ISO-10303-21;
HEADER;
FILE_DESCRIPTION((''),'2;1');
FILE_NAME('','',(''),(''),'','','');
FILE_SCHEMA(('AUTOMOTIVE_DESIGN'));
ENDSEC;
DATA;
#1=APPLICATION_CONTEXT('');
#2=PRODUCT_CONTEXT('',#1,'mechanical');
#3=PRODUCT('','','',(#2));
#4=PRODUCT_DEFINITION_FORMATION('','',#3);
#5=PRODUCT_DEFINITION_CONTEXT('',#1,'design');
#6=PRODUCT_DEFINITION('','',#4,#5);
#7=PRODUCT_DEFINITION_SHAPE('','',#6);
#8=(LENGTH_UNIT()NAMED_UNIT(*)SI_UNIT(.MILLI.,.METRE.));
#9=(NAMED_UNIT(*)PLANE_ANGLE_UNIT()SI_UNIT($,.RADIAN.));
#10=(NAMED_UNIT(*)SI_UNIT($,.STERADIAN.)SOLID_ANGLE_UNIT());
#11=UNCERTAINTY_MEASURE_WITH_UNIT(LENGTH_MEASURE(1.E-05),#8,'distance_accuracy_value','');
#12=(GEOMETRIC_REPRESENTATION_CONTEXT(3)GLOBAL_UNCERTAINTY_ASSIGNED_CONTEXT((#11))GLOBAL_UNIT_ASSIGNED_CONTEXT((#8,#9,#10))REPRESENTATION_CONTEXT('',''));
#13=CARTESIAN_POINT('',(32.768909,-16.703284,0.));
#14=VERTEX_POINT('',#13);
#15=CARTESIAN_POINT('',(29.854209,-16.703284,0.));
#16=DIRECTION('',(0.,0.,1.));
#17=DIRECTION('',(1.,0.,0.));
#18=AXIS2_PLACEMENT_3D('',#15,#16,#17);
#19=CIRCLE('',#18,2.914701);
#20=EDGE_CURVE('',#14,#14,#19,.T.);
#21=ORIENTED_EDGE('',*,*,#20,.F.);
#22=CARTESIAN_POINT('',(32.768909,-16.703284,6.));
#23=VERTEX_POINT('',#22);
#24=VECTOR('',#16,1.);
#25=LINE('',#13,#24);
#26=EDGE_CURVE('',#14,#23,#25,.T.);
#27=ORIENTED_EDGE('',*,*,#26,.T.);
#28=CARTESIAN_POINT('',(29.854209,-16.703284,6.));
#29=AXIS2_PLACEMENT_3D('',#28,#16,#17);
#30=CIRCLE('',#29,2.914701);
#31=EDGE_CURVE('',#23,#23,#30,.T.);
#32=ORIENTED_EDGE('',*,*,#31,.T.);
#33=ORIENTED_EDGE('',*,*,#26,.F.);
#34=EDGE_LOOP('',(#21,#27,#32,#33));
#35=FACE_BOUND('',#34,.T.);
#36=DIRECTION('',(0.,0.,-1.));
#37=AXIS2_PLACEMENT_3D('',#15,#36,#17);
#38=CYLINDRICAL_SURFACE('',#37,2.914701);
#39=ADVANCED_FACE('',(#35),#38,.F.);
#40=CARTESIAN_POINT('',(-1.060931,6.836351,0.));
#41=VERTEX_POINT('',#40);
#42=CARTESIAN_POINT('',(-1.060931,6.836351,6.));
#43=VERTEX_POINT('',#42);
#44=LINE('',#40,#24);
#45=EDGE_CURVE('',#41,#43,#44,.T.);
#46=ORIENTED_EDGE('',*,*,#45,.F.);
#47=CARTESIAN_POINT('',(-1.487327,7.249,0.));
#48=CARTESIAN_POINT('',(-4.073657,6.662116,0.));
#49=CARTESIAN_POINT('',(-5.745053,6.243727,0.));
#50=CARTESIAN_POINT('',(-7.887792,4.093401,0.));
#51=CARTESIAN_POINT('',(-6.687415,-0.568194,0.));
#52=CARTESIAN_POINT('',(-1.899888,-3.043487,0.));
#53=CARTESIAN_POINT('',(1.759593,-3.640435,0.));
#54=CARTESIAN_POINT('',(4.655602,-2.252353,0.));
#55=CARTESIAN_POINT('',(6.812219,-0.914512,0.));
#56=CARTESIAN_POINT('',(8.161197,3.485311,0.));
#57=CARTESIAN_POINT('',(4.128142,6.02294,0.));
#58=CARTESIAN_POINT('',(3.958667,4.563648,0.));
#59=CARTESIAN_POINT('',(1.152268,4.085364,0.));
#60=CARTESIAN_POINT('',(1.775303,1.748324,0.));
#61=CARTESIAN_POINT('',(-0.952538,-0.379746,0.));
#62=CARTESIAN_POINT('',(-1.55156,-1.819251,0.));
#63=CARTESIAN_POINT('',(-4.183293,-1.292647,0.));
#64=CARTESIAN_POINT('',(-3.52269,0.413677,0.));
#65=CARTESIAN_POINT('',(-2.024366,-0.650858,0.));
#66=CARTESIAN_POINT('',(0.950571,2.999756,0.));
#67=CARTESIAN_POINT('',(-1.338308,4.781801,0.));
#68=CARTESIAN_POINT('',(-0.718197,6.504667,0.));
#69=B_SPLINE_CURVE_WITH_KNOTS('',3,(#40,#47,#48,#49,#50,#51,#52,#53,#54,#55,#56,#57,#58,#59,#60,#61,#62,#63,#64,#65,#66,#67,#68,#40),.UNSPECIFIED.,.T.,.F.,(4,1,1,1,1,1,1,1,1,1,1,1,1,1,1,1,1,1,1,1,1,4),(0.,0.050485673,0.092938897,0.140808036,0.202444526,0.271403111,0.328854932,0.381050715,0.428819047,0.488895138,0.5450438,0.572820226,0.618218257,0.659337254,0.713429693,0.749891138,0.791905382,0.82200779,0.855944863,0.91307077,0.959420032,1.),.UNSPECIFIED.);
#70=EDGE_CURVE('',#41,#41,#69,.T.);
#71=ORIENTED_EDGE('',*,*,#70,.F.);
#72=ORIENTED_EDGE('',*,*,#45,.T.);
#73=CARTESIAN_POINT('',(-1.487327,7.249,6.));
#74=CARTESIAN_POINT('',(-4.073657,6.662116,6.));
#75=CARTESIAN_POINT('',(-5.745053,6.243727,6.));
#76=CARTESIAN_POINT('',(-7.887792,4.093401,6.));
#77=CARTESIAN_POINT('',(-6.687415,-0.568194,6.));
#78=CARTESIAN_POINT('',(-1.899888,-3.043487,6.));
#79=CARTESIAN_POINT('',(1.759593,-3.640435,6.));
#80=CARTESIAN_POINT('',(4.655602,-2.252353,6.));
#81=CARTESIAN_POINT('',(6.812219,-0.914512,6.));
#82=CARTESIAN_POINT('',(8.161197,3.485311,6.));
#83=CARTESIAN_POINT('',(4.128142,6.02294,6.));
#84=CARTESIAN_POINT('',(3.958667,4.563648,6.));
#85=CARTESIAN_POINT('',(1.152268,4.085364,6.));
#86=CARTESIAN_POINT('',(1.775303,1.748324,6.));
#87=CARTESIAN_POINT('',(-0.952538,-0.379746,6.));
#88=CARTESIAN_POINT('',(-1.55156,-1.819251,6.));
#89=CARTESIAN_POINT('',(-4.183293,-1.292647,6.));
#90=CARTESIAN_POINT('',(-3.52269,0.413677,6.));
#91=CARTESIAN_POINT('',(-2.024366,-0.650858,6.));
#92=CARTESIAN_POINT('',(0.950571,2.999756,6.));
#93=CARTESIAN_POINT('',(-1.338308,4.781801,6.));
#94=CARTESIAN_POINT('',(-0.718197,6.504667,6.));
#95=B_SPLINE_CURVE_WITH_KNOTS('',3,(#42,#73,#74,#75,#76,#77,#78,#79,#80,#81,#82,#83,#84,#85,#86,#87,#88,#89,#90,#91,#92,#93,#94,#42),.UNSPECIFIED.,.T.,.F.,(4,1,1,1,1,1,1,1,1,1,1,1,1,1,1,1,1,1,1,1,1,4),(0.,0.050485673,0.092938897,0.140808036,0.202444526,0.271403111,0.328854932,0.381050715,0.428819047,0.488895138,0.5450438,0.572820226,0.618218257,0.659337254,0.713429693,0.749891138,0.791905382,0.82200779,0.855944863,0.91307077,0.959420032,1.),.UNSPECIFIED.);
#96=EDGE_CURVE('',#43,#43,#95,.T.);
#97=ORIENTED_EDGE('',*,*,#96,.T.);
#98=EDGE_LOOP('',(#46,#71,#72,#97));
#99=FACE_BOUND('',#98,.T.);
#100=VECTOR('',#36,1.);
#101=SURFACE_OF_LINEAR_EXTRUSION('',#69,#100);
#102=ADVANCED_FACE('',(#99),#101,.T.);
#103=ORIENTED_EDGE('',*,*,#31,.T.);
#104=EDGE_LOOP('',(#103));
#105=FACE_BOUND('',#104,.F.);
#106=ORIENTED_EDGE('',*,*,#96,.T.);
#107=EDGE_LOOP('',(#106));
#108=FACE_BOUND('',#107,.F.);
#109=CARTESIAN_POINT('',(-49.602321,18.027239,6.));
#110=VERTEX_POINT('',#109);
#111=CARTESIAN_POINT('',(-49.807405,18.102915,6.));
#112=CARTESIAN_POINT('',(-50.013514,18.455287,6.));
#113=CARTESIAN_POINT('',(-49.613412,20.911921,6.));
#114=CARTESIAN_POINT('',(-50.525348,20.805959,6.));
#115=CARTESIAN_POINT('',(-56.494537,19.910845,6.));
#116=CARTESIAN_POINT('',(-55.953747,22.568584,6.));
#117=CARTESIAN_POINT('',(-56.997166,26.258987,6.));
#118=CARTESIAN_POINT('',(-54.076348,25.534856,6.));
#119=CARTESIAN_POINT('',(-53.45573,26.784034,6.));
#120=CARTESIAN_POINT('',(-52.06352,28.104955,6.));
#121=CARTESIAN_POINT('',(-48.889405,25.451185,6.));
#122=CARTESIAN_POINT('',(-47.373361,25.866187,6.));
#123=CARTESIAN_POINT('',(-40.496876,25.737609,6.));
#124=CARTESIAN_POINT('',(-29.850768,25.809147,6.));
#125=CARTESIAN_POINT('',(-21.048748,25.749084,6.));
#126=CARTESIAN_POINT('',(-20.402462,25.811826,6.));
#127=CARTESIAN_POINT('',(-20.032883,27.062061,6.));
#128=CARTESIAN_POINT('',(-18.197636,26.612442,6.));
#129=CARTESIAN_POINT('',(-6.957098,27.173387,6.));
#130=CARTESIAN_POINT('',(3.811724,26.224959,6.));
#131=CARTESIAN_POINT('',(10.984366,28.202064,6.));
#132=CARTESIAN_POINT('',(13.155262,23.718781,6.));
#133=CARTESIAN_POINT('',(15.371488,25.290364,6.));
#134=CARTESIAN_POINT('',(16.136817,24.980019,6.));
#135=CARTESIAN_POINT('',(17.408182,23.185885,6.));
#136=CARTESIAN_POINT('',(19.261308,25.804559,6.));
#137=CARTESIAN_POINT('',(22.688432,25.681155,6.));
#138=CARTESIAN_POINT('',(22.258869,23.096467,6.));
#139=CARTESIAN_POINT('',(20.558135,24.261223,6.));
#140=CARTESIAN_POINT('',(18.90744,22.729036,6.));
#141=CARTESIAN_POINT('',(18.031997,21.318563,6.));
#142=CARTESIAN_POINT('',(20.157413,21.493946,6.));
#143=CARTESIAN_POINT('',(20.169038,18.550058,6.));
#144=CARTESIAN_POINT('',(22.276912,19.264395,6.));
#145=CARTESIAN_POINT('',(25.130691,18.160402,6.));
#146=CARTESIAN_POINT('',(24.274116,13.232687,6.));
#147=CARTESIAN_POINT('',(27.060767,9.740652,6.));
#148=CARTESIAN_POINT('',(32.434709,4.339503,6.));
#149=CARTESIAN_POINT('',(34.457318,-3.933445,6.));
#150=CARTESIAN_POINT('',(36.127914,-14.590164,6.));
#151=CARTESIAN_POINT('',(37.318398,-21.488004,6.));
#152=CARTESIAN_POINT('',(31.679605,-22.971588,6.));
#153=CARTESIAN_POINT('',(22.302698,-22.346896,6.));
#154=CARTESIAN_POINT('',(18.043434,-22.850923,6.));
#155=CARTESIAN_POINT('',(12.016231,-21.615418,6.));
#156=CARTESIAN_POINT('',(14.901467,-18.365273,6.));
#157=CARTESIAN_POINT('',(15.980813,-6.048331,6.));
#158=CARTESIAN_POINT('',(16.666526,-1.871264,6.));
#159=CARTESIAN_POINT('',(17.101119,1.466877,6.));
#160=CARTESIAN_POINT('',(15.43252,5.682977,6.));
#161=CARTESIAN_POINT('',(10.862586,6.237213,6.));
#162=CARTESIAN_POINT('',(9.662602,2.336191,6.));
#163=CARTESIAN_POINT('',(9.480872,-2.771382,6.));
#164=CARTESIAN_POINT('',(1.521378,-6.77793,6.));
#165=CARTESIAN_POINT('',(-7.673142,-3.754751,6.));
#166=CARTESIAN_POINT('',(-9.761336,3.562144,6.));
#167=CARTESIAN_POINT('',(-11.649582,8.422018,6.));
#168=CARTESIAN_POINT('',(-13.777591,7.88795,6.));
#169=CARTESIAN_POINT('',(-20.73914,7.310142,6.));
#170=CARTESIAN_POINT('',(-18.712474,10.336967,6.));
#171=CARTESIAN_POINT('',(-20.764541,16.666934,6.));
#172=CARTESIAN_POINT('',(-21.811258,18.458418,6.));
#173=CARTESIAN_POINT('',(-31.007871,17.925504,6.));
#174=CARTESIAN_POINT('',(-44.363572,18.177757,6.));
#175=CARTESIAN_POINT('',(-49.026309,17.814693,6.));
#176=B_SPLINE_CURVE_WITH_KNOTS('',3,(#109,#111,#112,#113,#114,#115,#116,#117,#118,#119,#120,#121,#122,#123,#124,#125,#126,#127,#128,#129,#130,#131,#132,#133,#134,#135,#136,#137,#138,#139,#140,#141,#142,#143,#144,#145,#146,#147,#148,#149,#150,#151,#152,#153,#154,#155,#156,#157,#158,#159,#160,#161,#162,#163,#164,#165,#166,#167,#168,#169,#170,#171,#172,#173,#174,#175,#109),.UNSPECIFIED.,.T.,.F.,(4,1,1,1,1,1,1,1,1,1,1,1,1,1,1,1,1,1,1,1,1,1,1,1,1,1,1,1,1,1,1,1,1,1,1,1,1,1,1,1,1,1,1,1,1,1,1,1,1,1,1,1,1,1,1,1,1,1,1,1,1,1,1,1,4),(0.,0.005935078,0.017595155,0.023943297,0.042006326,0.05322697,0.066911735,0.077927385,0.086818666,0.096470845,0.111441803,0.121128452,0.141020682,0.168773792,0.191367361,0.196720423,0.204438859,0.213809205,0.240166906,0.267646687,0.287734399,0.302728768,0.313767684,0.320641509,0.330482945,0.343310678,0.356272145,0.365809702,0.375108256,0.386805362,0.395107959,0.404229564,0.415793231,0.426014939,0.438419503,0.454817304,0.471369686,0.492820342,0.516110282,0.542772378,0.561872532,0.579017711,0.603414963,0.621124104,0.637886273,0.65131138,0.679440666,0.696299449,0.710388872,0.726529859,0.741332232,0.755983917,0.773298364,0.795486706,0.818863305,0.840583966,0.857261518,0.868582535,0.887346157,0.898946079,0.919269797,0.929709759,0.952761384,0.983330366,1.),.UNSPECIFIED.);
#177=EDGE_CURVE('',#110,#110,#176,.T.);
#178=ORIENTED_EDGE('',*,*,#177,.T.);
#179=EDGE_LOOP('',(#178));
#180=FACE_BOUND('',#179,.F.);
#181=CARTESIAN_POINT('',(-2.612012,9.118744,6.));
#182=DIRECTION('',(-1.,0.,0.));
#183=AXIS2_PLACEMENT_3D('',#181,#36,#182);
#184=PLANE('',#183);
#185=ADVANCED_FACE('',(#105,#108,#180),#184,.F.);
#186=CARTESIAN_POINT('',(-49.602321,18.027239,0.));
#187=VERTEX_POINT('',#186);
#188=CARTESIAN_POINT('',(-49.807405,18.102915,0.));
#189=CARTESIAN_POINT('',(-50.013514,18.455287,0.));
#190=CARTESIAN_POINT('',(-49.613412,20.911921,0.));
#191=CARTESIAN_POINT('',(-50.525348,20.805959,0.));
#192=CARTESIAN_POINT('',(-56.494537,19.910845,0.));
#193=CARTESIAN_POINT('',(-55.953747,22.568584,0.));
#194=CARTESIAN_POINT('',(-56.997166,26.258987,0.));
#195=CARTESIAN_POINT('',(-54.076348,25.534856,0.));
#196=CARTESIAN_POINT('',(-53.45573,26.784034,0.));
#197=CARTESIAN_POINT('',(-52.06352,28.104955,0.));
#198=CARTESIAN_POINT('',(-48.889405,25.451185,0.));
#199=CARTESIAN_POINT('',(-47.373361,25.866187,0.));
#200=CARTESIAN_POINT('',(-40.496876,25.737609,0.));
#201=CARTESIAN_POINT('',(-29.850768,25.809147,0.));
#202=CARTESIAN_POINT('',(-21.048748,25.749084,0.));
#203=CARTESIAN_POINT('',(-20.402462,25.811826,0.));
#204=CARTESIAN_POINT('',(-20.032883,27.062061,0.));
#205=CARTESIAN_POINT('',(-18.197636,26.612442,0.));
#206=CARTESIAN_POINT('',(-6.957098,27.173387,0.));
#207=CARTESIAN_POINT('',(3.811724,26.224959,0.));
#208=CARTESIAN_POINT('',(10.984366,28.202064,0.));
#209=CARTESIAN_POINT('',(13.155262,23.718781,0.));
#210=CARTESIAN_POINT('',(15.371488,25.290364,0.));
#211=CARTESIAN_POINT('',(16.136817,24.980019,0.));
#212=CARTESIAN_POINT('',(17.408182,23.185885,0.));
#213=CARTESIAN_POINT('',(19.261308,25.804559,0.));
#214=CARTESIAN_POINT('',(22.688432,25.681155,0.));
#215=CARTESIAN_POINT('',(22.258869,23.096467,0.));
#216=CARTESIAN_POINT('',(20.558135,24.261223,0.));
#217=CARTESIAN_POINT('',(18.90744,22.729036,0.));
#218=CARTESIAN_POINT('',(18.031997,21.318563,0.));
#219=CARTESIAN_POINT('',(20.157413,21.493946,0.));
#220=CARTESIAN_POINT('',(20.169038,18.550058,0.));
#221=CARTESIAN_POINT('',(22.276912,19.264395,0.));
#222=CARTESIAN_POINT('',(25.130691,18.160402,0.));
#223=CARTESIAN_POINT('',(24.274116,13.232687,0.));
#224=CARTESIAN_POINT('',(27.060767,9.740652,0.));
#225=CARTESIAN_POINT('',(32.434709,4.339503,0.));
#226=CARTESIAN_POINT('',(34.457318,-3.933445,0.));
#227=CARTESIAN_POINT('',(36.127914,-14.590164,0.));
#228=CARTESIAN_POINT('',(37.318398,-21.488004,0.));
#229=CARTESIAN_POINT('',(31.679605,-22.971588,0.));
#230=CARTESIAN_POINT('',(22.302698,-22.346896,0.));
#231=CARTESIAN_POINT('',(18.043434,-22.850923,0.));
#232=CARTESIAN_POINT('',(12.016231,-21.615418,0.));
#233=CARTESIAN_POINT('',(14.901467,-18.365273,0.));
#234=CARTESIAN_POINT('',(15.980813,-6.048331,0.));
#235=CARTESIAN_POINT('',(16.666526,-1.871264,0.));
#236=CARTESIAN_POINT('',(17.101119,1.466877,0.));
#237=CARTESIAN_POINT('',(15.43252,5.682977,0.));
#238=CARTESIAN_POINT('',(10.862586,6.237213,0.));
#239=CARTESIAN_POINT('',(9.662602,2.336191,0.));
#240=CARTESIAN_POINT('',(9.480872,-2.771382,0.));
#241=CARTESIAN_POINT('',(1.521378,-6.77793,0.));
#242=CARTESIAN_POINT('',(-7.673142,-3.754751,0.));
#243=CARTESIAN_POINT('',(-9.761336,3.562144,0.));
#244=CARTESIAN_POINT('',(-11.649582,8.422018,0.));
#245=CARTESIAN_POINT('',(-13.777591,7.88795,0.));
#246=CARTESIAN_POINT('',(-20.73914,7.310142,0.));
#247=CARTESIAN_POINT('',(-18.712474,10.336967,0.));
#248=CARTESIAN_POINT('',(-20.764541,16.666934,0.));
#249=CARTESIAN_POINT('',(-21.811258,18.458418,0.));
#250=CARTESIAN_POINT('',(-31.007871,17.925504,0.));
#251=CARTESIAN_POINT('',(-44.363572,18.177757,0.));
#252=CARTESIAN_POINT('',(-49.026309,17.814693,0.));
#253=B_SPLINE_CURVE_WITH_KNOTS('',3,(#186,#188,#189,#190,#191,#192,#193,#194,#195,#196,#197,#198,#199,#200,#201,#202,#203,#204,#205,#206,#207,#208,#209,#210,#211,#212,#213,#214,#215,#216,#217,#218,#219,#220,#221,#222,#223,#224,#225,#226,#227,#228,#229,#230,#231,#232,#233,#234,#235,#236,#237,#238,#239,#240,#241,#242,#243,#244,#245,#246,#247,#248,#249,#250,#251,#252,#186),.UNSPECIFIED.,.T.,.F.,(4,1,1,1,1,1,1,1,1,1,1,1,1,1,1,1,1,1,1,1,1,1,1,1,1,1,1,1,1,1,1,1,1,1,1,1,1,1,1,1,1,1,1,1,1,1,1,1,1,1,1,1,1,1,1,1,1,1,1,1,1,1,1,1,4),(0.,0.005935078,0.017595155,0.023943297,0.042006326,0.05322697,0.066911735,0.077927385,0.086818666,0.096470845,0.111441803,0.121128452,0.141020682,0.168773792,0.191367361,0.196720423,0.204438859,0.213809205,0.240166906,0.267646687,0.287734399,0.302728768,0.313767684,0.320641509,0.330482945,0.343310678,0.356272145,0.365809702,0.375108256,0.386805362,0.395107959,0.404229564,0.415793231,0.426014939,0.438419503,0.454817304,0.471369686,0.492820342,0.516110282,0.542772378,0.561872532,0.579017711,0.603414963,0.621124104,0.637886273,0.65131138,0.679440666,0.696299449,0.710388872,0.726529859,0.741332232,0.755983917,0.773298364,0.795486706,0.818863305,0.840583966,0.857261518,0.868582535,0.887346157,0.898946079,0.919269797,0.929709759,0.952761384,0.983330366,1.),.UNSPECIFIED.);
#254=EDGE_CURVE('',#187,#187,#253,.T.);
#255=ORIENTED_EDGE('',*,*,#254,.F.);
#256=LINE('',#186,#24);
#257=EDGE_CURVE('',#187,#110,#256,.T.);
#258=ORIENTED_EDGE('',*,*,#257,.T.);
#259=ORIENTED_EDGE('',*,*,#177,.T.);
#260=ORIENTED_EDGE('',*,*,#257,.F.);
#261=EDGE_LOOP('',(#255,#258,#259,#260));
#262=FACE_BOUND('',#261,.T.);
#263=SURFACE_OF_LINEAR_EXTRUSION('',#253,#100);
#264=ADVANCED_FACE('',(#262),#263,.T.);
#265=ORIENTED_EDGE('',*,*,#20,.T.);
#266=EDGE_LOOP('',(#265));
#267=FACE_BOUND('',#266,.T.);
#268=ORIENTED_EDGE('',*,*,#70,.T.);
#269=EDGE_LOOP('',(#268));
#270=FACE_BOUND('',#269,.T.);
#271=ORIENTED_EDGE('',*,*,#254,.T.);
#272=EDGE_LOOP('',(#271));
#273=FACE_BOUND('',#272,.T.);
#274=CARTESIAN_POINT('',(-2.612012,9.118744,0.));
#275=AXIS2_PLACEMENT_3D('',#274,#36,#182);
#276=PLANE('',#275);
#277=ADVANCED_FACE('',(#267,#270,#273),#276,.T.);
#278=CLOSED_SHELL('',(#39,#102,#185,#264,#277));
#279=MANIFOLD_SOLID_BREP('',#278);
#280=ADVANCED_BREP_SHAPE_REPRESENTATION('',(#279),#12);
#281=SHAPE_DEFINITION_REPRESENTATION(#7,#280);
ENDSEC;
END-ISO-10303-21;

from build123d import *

# Parameters (mm, degrees)
F0_R     = 2.9147006616
F1_DEPTH = 6


# Not quite as in the source:
# - the program builds the solid bodies; features that only make, move or delete a surface that nothing else refers to are left out


with BuildPart() as f1:
    # F0 (on Top) → F1 (new body)
    with BuildSketch(Plane.XY):
        with BuildLine():
            add(Edge.make_bspline(
                [(-49.6023209556, 18.0272394648), (-49.8074049045, 18.1029147074), (-50.0135140203, 18.4552867998), (-49.6134118775, 20.9119208188), (-50.5253484682, 20.8059587598), (-56.4945372814, 19.9108445595), (-55.9537471934, 22.5685842047), (-56.9971661783, 26.2589865372), (-54.0763480855, 25.5348560374), (-53.4557302149, 26.7840339255), (-52.0635197146, 28.1049552213), (-48.8894052923, 25.4511846491), (-47.3733605364, 25.8661869079), (-40.4968760467, 25.7376088359), (-29.8507681218, 25.8091465961), (-21.0487484491, 25.7490835391), (-20.4024617931, 25.8118263554), (-20.0328825434, 27.0620609399), (-18.1976358309, 26.6124423912), (-6.9570984973, 27.1733866362), (3.8117240872, 26.2249589242), (10.9843657407, 28.2020637076), (13.1552615006, 23.7187810056), (15.3714876777, 25.2903636303), (16.136817469, 24.9800189126), (17.4081822679, 23.1858848474), (19.2613078068, 25.8045591801), (22.6884322766, 25.6811552369), (22.2588685569, 23.0964670957), (20.558135038, 24.2612231235), (18.9074395708, 22.7290362197), (18.0319969708, 21.3185632856), (20.1574134565, 21.4939458775), (20.1690381309, 18.5500576059), (22.2769119615, 19.2643947473), (25.1306908499, 18.1604015194), (24.2741164567, 13.2326866853), (27.0607669188, 9.7406518128), (32.4347089231, 4.3395026277), (34.4573175975, -3.9334445072), (36.1279143933, -14.5901637251), (37.3183979381, -21.4880036609), (31.6796050531, -22.9715878156), (22.3026977732, -22.3468961354), (18.0434343424, -22.8509233977), (12.0162311177, -21.6154183479), (14.901467169, -18.365273499), (15.9808130291, -6.0483306163), (16.666526274, -1.8712639675), (17.1011194141, 1.4668769818), (15.4325203205, 5.6829770649), (10.8625859398, 6.2372133359), (9.6626017816, 2.3361906801), (9.4808715441, -2.7713821565), (1.5213780842, -6.7779297446), (-7.6731415433, -3.7547507099), (-9.761336118, 3.5621435123), (-11.6495824525, 8.4220182056), (-13.7775909876, 7.8879501127), (-20.7391399513, 7.3101422928), (-18.7124742611, 10.3369667678), (-20.7645413341, 16.6669335216), (-21.8112583257, 18.4584177885), (-31.0078706979, 17.9255039273), (-44.3635723867, 18.1777572258), (-49.0263092465, 17.8146932072), (-49.6023209556, 18.0272394648)],
                knots=[0, 0, 0, 0, 0.005935078, 0.0175951552, 0.0239432968, 0.0420063258, 0.0532269701, 0.0669117352, 0.0779273846, 0.0868186658, 0.0964708455, 0.1114418033, 0.1211284516, 0.1410206824, 0.1687737919, 0.1913673607, 0.1967204234, 0.2044388586, 0.2138092055, 0.2401669057, 0.267646687, 0.2877343994, 0.3027287684, 0.3137676843, 0.320641509, 0.3304829452, 0.3433106776, 0.3562721449, 0.365809702, 0.3751082564, 0.3868053621, 0.3951079593, 0.4042295641, 0.415793231, 0.4260149386, 0.4384195025, 0.454817304, 0.4713696863, 0.4928203417, 0.5161102815, 0.5427723779, 0.561872532, 0.5790177112, 0.6034149628, 0.6211241043, 0.637886273, 0.6513113797, 0.6794406659, 0.6962994492, 0.7103888721, 0.726529859, 0.7413322318, 0.7559839172, 0.7732983638, 0.7954867055, 0.8188633052, 0.8405839663, 0.8572615179, 0.868582535, 0.8873461566, 0.8989460787, 0.9192697971, 0.9297097593, 0.9527613841, 0.9833303657, 1, 1, 1, 1], degree=3))
        make_face()
        with Locations((29.8542086492, -16.7032843149)):
            Circle(F0_R, mode=Mode.SUBTRACT)
        with BuildLine():
            add(Edge.make_bspline(
                [(-1.0609307354, 6.8363510625), (-1.4873269942, 7.249000096), (-4.0736565125, 6.6621158658), (-5.745052855, 6.2437274615), (-7.8877921378, 4.0934006501), (-6.6874148039, -0.5681944173), (-1.8998880071, -3.0434868049), (1.7595930368, -3.6404349466), (4.6556018883, -2.2523534565), (6.8122191281, -0.9145123394), (8.161197299, 3.4853110891), (4.1281422183, 6.0229396454), (3.9586665615, 4.5636478818), (1.1522679825, 4.0853638837), (1.7753034047, 1.7483239013), (-0.9525375044, -0.3797461415), (-1.5515597494, -1.8192513773), (-4.1832932305, -1.2926465042), (-3.5226896431, 0.4136772132), (-2.0243664942, -0.6508577164), (0.9505711019, 2.9997561949), (-1.3383084002, 4.7818012859), (-0.7181969406, 6.5046671739), (-1.0609307354, 6.8363510625)],
                knots=[0, 0, 0, 0, 0.0504856732, 0.0929388967, 0.1408080364, 0.2024445263, 0.2714031111, 0.3288549318, 0.3810507153, 0.4288190471, 0.4888951383, 0.5450438002, 0.5728202259, 0.6182182572, 0.659337254, 0.7134296933, 0.749891138, 0.7919053815, 0.8220077903, 0.8559448629, 0.9130707698, 0.9594200324, 1, 1, 1, 1], degree=3))
        make_face(mode=Mode.SUBTRACT)
    extrude(amount=F1_DEPTH)


solid = f1.part
